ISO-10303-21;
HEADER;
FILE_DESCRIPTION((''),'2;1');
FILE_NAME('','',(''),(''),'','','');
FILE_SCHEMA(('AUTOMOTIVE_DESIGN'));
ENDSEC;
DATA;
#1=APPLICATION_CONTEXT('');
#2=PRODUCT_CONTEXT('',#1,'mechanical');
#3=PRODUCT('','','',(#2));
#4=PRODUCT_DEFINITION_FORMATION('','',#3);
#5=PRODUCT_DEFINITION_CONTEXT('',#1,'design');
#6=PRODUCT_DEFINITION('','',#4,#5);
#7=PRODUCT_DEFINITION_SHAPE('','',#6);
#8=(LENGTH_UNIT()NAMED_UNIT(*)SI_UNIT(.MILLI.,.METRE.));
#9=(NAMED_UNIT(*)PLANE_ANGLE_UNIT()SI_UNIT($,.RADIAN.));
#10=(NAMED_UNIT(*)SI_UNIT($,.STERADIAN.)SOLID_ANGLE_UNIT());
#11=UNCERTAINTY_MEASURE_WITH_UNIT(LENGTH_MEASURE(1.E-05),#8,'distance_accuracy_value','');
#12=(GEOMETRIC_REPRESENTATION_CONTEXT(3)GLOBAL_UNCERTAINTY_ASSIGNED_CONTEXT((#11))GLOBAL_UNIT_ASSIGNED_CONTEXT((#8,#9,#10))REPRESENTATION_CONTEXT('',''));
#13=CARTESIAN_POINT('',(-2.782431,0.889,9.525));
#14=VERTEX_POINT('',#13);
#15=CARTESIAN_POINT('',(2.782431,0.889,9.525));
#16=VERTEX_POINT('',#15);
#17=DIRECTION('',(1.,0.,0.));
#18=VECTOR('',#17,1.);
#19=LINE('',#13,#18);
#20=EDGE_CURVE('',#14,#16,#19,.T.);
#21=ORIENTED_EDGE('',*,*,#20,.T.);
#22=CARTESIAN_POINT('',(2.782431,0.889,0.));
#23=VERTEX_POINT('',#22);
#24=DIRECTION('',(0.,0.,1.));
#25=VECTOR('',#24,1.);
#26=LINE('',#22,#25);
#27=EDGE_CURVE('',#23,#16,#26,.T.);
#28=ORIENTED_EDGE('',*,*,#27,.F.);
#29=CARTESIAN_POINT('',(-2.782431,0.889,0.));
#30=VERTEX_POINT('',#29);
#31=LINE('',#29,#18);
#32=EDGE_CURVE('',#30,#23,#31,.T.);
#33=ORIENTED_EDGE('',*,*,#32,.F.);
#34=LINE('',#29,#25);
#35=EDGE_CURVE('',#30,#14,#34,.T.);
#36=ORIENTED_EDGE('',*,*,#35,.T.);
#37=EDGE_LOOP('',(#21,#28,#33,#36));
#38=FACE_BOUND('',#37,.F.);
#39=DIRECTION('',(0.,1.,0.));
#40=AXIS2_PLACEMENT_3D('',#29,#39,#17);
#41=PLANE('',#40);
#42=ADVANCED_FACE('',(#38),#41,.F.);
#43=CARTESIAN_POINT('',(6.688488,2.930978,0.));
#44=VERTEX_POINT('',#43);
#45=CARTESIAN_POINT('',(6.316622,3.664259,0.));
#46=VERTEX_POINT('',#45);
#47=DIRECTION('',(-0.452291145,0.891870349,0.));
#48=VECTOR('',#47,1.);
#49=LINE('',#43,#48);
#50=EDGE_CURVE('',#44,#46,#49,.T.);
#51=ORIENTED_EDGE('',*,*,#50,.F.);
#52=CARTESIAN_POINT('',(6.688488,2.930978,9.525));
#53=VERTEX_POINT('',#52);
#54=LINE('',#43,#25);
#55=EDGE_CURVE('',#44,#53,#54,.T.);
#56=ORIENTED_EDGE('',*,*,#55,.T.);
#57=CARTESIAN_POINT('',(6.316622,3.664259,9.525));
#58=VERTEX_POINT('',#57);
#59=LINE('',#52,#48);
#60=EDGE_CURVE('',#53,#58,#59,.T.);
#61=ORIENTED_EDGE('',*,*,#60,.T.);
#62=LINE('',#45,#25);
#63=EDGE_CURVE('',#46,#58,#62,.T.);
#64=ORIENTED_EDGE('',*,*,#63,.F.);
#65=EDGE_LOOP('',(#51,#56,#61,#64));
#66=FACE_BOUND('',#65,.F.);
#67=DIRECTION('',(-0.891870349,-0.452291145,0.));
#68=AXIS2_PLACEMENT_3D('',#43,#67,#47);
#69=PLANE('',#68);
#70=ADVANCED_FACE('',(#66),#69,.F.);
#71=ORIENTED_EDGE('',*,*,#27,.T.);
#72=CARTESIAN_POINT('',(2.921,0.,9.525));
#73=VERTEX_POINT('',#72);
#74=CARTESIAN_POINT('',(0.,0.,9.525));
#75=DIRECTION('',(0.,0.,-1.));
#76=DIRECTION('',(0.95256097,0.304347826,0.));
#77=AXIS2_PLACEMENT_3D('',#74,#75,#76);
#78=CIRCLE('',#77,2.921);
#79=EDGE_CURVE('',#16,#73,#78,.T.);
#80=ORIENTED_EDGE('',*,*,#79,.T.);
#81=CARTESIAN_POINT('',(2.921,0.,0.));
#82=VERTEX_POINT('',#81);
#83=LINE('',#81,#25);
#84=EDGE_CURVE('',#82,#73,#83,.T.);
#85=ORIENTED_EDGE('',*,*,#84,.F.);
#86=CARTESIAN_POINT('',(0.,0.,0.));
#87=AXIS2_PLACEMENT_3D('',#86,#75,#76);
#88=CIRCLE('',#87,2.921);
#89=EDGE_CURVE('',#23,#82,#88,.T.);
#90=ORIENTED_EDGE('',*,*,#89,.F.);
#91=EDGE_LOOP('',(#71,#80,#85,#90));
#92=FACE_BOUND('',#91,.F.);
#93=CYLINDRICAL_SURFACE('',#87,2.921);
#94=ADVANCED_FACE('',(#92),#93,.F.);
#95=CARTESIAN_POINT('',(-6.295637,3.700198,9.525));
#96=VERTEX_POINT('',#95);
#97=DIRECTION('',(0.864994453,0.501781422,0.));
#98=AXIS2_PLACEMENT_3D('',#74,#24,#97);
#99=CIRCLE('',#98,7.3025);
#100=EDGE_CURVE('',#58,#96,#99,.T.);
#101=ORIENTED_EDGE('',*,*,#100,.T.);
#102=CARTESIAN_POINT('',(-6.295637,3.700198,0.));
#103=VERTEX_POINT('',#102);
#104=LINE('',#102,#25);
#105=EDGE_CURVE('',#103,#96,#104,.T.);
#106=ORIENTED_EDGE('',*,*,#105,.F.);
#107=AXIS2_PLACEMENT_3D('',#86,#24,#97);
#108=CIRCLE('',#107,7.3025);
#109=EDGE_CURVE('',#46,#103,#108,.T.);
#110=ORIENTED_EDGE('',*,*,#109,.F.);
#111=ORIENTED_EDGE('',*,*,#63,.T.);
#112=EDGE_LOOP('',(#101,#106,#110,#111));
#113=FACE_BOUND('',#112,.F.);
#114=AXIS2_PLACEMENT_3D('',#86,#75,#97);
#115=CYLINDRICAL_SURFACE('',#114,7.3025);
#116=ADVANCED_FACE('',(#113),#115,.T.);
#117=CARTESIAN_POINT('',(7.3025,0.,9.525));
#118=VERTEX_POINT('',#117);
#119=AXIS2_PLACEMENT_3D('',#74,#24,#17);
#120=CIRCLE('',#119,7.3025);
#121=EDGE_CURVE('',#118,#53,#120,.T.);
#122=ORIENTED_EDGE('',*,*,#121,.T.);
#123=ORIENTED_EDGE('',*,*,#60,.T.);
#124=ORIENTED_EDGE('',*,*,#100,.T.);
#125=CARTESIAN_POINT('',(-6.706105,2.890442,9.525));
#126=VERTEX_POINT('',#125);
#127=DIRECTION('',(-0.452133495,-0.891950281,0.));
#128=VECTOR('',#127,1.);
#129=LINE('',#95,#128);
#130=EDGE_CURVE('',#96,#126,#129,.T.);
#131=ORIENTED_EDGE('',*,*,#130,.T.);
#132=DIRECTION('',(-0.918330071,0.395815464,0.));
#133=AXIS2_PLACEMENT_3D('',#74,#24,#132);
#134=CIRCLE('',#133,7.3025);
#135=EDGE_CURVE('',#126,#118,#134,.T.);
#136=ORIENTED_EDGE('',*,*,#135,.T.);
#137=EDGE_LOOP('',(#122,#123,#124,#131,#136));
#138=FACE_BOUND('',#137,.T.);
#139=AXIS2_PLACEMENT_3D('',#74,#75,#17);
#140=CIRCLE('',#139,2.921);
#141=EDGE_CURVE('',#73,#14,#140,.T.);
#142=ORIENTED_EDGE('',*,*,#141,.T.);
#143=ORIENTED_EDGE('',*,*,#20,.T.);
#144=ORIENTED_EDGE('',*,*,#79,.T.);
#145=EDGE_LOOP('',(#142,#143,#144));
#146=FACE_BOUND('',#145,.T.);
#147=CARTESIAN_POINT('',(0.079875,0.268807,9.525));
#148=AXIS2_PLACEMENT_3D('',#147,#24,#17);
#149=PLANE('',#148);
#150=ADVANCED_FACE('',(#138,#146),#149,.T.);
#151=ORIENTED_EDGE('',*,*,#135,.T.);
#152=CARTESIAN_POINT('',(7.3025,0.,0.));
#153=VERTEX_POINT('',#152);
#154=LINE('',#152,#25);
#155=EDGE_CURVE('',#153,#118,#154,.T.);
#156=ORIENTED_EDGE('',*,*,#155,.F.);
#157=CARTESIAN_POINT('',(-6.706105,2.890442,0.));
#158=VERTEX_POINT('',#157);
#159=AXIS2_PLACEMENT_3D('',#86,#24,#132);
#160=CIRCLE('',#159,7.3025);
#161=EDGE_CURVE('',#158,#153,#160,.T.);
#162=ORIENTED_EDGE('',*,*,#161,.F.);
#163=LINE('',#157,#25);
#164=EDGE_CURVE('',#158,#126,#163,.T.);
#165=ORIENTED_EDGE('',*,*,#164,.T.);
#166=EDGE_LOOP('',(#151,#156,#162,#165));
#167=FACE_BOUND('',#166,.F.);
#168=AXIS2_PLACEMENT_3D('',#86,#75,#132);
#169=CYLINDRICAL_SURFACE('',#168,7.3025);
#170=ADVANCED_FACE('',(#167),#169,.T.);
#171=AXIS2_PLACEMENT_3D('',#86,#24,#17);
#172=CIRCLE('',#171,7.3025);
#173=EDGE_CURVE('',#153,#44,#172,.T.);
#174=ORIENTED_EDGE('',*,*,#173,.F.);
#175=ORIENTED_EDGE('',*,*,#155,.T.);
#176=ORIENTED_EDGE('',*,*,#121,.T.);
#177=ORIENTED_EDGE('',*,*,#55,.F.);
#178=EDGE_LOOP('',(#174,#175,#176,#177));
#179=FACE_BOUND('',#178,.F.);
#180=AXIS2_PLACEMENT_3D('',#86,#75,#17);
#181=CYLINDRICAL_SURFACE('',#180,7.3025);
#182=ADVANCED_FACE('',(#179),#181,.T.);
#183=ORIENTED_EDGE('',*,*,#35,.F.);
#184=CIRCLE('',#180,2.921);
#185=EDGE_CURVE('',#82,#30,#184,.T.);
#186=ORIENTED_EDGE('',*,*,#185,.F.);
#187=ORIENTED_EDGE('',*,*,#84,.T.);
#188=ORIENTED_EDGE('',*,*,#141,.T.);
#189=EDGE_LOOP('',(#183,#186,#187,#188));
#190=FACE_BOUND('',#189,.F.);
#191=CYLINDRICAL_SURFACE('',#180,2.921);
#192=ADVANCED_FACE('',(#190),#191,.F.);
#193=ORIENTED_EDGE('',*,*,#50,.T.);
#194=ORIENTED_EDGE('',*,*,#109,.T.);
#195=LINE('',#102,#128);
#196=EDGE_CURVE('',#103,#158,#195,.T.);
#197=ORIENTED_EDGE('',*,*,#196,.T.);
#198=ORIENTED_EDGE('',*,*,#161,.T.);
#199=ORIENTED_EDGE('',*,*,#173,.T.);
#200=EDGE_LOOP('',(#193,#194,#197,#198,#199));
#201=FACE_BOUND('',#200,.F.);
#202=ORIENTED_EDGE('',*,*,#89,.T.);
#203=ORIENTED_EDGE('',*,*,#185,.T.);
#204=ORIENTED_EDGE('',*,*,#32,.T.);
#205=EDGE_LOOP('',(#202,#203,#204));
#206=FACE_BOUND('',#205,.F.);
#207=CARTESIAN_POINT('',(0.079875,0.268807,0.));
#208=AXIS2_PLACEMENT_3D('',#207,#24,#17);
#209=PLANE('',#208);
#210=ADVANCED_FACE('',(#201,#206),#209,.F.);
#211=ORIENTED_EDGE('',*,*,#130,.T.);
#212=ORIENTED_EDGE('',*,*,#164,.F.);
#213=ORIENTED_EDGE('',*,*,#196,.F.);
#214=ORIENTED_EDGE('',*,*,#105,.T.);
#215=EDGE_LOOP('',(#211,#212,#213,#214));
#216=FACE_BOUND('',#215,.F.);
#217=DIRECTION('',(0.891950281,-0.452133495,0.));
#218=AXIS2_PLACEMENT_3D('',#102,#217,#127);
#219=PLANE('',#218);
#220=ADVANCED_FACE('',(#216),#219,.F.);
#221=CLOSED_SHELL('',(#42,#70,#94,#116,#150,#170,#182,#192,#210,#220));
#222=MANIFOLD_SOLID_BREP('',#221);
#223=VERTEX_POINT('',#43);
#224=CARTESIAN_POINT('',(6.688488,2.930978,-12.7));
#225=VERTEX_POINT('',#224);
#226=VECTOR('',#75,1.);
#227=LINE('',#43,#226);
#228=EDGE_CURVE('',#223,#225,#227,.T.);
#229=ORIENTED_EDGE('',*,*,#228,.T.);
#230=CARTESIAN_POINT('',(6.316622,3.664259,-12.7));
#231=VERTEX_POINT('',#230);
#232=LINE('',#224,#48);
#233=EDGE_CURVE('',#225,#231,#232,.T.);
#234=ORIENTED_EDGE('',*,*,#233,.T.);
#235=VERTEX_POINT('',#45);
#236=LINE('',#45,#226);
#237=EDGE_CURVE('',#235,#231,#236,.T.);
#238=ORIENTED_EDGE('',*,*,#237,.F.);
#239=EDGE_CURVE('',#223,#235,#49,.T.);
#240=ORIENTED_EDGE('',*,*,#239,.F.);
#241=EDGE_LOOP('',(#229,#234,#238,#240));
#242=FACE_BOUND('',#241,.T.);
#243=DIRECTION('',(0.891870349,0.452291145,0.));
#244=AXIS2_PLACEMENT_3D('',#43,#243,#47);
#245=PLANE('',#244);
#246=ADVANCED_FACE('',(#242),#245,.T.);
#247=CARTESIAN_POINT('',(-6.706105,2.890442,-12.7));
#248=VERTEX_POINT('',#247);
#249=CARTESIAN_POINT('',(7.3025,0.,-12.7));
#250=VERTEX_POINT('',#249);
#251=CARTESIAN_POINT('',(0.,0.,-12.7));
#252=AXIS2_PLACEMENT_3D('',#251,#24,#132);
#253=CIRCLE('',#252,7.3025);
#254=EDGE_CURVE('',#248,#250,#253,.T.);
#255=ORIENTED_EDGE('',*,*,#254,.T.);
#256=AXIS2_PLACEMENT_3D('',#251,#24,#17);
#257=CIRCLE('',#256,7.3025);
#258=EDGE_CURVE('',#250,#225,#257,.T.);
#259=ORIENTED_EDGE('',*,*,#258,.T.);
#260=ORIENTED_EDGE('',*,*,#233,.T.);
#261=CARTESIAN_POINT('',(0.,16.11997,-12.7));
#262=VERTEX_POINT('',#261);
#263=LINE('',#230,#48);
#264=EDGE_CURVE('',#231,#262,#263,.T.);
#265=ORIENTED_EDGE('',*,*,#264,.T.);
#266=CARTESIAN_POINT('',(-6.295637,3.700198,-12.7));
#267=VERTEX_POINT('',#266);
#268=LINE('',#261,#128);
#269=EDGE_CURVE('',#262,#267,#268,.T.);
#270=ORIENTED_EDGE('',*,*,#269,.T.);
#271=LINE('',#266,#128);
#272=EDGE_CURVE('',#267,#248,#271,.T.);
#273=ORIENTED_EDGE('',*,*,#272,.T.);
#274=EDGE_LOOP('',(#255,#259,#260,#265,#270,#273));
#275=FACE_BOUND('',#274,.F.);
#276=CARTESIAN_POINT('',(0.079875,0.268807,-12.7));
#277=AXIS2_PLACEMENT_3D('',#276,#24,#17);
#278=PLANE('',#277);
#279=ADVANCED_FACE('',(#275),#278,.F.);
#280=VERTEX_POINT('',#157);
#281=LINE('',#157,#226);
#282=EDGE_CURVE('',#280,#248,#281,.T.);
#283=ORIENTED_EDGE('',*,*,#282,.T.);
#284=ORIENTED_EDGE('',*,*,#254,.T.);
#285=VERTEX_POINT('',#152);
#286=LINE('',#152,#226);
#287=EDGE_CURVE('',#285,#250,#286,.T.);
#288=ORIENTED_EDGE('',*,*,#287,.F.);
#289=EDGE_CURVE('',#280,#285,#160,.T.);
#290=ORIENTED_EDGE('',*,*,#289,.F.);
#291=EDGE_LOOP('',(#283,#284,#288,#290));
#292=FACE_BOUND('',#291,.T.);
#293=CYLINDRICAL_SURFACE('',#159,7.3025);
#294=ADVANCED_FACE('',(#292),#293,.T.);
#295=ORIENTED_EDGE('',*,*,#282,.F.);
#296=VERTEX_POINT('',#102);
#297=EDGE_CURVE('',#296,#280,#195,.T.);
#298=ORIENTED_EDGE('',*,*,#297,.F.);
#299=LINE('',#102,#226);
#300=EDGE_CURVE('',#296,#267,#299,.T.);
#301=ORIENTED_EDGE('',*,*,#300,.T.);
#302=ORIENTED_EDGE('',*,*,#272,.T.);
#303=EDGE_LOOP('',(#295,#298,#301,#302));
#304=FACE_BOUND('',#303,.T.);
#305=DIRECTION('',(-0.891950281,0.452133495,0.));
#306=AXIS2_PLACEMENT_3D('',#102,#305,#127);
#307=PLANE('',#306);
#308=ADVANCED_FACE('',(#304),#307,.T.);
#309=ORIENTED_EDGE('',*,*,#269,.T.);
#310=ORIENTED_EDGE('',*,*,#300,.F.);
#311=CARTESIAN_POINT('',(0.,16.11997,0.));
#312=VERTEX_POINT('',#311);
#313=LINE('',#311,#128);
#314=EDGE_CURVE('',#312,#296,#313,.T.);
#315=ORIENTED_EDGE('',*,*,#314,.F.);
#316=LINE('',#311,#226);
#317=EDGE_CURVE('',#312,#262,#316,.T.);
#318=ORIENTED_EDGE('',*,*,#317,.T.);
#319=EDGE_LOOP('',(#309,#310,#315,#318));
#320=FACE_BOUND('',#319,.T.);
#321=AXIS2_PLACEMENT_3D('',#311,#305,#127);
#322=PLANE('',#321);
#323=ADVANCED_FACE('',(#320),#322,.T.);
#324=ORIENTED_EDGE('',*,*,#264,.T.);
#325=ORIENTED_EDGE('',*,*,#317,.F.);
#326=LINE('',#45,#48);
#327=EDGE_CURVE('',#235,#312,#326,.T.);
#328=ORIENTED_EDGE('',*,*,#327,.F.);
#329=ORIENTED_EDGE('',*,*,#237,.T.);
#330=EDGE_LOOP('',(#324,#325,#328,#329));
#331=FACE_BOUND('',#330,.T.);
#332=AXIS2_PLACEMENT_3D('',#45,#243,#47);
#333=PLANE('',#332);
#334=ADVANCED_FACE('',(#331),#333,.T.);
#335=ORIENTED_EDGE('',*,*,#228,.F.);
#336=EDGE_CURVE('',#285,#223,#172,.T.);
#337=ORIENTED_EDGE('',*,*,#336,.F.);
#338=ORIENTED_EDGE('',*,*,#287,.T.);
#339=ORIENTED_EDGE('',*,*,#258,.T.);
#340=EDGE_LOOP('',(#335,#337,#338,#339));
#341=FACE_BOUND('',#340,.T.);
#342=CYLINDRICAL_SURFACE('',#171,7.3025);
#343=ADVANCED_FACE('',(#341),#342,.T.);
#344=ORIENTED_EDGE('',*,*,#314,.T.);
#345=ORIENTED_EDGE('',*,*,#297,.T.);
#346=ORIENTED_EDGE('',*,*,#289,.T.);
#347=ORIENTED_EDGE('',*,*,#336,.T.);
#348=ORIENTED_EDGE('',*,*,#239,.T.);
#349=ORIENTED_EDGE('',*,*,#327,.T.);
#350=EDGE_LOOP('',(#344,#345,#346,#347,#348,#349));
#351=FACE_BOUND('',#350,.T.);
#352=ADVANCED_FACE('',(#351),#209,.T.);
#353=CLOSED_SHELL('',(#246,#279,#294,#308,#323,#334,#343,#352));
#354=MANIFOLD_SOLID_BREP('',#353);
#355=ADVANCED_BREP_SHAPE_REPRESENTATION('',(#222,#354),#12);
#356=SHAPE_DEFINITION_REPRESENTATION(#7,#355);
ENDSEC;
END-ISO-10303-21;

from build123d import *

# Parameters (mm, degrees)
F1_DEPTH = 9.525
F2_DEPTH = 12.7


with BuildPart() as f1:
    # F0 (on Top) → F1 (new body)
    with BuildSketch(Plane.XY):
        with BuildLine():
            ThreePointArc((-6.7061053414, 2.890442423), (-1.4756645952, -7.1518473315), (7.3025, 0))
            ThreePointArc((7.3025, 0), (7.1473488528, 1.4973011139), (6.6884881888, 2.9309779936))
            Line((6.6884881888, 2.9309779936), (6.3166219962, 3.6642588347))
            ThreePointArc((6.3166219962, 3.6642588347), (0.0208084361, 7.3024703532), (-6.2956369305, 3.7001975474))
            Line((-6.2956369305, 3.7001975474), (-6.7061053414, 2.890442423))
        make_face()
        with BuildLine():
            ThreePointArc((2.7824305921, 0.889), (2.8861497501, 0.4498673362), (2.921, 0))
            ThreePointArc((2.921, 0), (-0.4498673362, -2.8861497501), (-2.7824305921, 0.889))
            ThreePointArc((-2.7824305921, 0.889), (0, 2.921), (2.7824305921, 0.889))
        make_face(mode=Mode.SUBTRACT)
        with BuildLine():
            Line((-2.7824305921, 0.889), (2.7824305921, 0.889))
            ThreePointArc((2.7824305921, 0.889), (0, 2.921), (-2.7824305921, 0.889))
        make_face()
    extrude(amount=F1_DEPTH)


with BuildPart() as f2:
    # F0 (on Top) → F2 (new body)
    with BuildSketch(Plane.XY):
        with BuildLine():
            ThreePointArc((-6.7061053414, 2.890442423), (-1.4756645952, -7.1518473315), (7.3025, 0))
            ThreePointArc((7.3025, 0), (7.1473488528, 1.4973011139), (6.6884881888, 2.9309779936))
            Line((6.6884881888, 2.9309779936), (6.3166219962, 3.6642588347))
            ThreePointArc((6.3166219962, 3.6642588347), (0.0208084361, 7.3024703532), (-6.2956369305, 3.7001975474))
            Line((-6.2956369305, 3.7001975474), (-6.7061053414, 2.890442423))
        make_face()
        with BuildLine():
            ThreePointArc((2.7824305921, 0.889), (2.8861497501, 0.4498673362), (2.921, 0))
            ThreePointArc((2.921, 0), (-0.4498673362, -2.8861497501), (-2.7824305921, 0.889))
            ThreePointArc((-2.7824305921, 0.889), (0, 2.921), (2.7824305921, 0.889))
        make_face(mode=Mode.SUBTRACT)
        with BuildLine():
            ThreePointArc((-6.2956369305, 3.7001975474), (0.0208084361, 7.3024703532), (6.3166219962, 3.6642588347))
            Line((6.3166219962, 3.6642588347), (0, 16.1199700087))
            Line((0, 16.1199700087), (-6.2956369305, 3.7001975474))
        make_face()
        with BuildLine():
            ThreePointArc((-2.7824305921, 0.889), (-0.4498673362, -2.8861497501), (2.921, 0))
            ThreePointArc((2.921, 0), (2.8861497501, 0.4498673362), (2.7824305921, 0.889))
            Line((2.7824305921, 0.889), (-2.7824305921, 0.889))
        make_face()
        with BuildLine():
            Line((-2.7824305921, 0.889), (2.7824305921, 0.889))
            ThreePointArc((2.7824305921, 0.889), (0, 2.921), (-2.7824305921, 0.889))
        make_face()
    extrude(amount=-F2_DEPTH)


solid = Compound([f1.part, f2.part])
